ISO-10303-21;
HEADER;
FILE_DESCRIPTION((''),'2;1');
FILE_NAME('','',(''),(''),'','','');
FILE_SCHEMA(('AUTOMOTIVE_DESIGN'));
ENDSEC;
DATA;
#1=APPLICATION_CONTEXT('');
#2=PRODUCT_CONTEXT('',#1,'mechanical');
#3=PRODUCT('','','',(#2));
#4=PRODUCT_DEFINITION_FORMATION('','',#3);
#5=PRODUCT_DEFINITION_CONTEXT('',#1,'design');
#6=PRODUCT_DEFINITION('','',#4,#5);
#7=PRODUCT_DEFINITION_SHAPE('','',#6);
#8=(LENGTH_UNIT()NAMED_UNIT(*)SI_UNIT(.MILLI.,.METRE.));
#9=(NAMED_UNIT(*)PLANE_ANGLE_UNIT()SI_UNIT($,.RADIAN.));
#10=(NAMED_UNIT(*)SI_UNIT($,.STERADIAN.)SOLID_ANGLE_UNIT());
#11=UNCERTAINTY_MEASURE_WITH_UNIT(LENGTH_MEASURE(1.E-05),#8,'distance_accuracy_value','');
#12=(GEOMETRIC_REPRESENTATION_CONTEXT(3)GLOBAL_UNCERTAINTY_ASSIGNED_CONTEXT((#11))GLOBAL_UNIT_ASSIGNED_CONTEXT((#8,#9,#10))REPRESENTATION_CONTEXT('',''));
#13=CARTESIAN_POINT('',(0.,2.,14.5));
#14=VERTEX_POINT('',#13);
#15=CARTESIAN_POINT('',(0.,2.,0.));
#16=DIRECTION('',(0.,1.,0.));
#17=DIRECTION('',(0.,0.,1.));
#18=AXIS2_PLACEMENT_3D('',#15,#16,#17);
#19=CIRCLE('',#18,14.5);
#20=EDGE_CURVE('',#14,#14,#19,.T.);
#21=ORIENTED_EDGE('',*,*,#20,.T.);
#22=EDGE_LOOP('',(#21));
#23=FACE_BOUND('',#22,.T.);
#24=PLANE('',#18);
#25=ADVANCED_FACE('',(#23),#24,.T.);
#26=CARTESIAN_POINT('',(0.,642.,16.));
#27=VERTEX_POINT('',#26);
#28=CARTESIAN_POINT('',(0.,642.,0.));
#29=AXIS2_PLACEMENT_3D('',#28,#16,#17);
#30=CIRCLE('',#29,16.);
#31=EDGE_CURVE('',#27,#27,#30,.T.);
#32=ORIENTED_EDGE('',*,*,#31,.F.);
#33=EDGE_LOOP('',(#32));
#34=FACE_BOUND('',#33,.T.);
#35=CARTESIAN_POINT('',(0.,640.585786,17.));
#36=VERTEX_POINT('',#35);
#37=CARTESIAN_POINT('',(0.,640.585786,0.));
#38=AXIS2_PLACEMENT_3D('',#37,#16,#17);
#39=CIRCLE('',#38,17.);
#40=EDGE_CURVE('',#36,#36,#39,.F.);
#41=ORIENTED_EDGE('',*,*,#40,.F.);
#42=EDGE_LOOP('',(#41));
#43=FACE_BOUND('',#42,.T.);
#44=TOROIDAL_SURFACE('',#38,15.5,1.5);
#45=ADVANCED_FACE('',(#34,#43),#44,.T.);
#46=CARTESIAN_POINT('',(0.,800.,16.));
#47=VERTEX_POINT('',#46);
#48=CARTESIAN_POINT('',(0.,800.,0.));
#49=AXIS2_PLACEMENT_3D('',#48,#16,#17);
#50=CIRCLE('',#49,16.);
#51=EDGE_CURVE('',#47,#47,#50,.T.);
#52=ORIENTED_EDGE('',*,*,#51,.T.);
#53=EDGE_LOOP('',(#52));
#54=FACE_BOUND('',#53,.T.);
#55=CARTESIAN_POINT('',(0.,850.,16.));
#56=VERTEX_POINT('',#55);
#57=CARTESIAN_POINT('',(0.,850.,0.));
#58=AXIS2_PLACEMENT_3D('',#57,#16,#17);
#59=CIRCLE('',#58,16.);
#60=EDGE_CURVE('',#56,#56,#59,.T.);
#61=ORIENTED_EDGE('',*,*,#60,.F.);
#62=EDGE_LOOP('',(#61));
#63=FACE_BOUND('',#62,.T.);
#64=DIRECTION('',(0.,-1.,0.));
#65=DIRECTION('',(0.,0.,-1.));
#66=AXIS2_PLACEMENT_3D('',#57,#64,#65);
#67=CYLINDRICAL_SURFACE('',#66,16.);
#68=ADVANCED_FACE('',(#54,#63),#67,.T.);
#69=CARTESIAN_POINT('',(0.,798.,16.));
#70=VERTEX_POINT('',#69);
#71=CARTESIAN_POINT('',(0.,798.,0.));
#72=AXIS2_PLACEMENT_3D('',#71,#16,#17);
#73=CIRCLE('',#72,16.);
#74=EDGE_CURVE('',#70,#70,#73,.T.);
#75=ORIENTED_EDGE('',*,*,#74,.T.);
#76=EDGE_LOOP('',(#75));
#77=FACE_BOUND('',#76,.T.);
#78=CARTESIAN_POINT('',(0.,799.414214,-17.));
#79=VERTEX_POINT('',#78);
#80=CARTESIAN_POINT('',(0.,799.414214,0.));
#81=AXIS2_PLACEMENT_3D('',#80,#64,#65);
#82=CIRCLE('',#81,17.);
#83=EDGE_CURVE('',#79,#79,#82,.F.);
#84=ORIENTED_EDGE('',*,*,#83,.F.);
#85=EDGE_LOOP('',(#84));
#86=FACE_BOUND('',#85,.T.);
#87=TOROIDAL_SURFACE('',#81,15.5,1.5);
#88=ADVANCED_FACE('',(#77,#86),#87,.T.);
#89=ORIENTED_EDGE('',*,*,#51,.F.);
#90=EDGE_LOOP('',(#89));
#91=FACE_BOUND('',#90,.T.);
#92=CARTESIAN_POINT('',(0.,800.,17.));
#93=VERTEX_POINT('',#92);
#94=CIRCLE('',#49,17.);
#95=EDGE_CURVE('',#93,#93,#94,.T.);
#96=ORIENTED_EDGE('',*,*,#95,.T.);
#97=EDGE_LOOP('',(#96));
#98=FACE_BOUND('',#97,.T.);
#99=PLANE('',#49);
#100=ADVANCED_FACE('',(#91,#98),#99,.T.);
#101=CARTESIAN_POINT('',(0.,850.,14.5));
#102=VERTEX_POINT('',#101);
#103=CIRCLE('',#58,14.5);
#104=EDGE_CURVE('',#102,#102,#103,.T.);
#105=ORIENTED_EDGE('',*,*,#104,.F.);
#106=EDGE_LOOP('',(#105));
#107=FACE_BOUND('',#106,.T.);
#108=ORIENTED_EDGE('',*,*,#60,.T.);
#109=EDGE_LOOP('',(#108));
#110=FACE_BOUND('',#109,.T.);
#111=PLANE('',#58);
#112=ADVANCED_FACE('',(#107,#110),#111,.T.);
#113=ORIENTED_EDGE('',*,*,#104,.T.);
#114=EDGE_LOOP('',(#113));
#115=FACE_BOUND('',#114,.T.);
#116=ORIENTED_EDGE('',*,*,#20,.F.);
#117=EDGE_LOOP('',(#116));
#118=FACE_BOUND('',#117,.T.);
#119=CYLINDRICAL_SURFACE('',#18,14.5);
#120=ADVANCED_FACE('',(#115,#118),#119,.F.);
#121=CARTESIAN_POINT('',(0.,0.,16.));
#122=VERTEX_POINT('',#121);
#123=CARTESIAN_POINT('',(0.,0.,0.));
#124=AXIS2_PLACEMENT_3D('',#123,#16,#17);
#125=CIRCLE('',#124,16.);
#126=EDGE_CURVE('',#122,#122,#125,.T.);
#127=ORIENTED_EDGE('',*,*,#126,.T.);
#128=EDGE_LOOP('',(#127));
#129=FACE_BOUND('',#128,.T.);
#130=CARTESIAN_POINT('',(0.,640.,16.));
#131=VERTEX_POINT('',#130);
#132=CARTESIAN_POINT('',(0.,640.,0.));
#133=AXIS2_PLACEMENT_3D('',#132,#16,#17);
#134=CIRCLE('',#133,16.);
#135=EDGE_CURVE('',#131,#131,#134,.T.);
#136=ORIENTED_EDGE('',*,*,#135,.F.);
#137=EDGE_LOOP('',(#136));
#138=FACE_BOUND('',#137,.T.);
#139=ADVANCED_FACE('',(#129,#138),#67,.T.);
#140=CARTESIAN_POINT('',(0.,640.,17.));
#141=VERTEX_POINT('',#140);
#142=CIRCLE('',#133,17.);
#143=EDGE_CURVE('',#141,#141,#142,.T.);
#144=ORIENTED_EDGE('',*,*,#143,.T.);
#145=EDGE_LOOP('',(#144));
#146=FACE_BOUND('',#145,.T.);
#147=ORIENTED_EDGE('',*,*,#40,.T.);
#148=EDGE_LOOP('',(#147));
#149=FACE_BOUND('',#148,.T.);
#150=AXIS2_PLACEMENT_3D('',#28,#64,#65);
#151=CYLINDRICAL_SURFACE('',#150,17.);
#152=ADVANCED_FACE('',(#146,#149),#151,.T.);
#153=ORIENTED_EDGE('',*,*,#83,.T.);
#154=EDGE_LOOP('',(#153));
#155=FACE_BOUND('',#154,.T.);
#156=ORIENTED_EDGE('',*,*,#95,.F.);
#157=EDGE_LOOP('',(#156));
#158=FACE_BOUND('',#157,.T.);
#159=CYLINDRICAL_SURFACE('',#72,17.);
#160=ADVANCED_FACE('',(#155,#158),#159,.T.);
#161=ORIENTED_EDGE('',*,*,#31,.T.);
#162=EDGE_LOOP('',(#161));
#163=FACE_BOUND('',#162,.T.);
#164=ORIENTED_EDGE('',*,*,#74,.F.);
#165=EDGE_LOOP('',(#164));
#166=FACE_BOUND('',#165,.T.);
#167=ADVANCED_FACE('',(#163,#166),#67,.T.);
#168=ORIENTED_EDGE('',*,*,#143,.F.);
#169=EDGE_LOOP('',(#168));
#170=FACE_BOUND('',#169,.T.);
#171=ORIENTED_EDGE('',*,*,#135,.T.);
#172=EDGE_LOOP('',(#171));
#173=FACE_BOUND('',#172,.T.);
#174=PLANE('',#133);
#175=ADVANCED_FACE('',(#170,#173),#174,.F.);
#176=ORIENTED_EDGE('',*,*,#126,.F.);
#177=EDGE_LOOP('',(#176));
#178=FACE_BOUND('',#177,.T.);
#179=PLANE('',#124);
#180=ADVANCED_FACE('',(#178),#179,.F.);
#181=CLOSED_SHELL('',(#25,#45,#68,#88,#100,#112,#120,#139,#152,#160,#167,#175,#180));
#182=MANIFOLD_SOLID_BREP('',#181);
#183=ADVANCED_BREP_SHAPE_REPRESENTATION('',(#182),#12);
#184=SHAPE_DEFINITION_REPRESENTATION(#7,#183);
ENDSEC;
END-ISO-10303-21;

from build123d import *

# Parameters (mm, degrees)
SKETCH1_R           = 16
BOSS_EXTRUDE1_DEPTH = 850
SKETCH2_R           = 14.5
CUT_EXTRUDE1_DEPTH  = 848
BOSS_EXTRUDE2_START = -2
SKETCH3_R           = 17
SKETCH3_R_2         = 16
BOSS_EXTRUDE2_DEPTH = 2
FILLET1_R           = 1.5
SKETCH4_R           = 17
SKETCH4_R_2         = 16
BOSS_EXTRUDE3_DEPTH = 2
FILLET2_R           = 1.5


with BuildPart() as part:
    # Sketch1 → Boss-Extrude1 (new body)
    with BuildSketch(Plane(origin=(0, 0, 0), x_dir=(1, 0, 0), z_dir=(0, 1, 0))):
        with Locations(Location((0, 0, 0), (0, 0, 270))):
            Circle(SKETCH1_R)
    extrude(amount=BOSS_EXTRUDE1_DEPTH)

    # Sketch2 → Cut-Extrude1 (cut)
    with BuildSketch(Plane(origin=(0, 850, 0), x_dir=(1, 0, 0), z_dir=(0, 1, 0))):
        with Locations(Location((0, 0, 0), (0, 0, 270))):
            Circle(SKETCH2_R)
    extrude(amount=-CUT_EXTRUDE1_DEPTH, mode=Mode.SUBTRACT)

    # Sketch3 → Boss-Extrude2 (add)
    with BuildSketch(Plane(origin=(0, 800, 0), x_dir=(1, 0, 0), z_dir=(0, 1, 0)).offset(BOSS_EXTRUDE2_START)):
        with Locations(Location((0, 0, 0), (0, 0, 270))):
            Circle(SKETCH3_R)
        with Locations(Location((0, 0, 0), (0, 0, 270))):
            Circle(SKETCH3_R_2, mode=Mode.SUBTRACT)
    extrude(amount=BOSS_EXTRUDE2_DEPTH)

    # Fillet1
    # the kernel refuses this fillet: 1.5 mm, written as the material it takes off along each edge
    with BuildSketch(Plane(origin=(0, 798, 0), x_dir=(0, 0, 1), z_dir=(-1, 0, 0))) as fillet1_piece_1:
        with BuildLine():
            CenterArc((15.5, 1.414213562), FILLET1_R, 289.471220634, 70.528779366)
            Line((17, 1.414213562), (17.03, 1.414213562))
            Line((17.03, 1.414213562), (17.03, 0))
            Line((17.03, 0), (17, -0.03))
            ThreePointArc((17, -0.03), (16.5, -0.03), (16.01, -0.028284271))
            Line((16.01, -0.028284271), (16, 0))
        make_face()
    revolve(axis=Axis((0, 798, 0), (0, 1, 0)), mode=Mode.SUBTRACT)

    # Sketch4 → Boss-Extrude3 (add)
    with BuildSketch(Plane(origin=(0, 640, 0), x_dir=(1, 0, 0), z_dir=(0, 1, 0))):
        with Locations(Location((0, 0, 0), (0, 0, 270))):
            Circle(SKETCH4_R)
        with Locations(Location((0, 0, 0), (0, 0, 270))):
            Circle(SKETCH4_R_2, mode=Mode.SUBTRACT)
    extrude(amount=BOSS_EXTRUDE3_DEPTH)

    # Fillet2
    # the kernel refuses this fillet: 1.5 mm, written as the material it takes off along each edge
    with BuildSketch(Plane(origin=(0, 642, 0), x_dir=(0, 0, 1), z_dir=(-1, 0, 0))) as fillet2_piece_1:
        with BuildLine():
            CenterArc((15.5, -1.414213562), FILLET2_R, 0, 70.528779366)
            Line((16, 0), (16.01, 0.028284271))
            ThreePointArc((16.01, 0.028284271), (16.5, 0.03), (17, 0.03))
            Line((17, 0.03), (17.03, 0))
            Line((17.03, 0), (17.03, -1.414213562))
            Line((17.03, -1.414213562), (17, -1.414213562))
        make_face()
    revolve(axis=Axis((0, 642, 0), (0, 1, 0)), mode=Mode.SUBTRACT)


solid = part.part
